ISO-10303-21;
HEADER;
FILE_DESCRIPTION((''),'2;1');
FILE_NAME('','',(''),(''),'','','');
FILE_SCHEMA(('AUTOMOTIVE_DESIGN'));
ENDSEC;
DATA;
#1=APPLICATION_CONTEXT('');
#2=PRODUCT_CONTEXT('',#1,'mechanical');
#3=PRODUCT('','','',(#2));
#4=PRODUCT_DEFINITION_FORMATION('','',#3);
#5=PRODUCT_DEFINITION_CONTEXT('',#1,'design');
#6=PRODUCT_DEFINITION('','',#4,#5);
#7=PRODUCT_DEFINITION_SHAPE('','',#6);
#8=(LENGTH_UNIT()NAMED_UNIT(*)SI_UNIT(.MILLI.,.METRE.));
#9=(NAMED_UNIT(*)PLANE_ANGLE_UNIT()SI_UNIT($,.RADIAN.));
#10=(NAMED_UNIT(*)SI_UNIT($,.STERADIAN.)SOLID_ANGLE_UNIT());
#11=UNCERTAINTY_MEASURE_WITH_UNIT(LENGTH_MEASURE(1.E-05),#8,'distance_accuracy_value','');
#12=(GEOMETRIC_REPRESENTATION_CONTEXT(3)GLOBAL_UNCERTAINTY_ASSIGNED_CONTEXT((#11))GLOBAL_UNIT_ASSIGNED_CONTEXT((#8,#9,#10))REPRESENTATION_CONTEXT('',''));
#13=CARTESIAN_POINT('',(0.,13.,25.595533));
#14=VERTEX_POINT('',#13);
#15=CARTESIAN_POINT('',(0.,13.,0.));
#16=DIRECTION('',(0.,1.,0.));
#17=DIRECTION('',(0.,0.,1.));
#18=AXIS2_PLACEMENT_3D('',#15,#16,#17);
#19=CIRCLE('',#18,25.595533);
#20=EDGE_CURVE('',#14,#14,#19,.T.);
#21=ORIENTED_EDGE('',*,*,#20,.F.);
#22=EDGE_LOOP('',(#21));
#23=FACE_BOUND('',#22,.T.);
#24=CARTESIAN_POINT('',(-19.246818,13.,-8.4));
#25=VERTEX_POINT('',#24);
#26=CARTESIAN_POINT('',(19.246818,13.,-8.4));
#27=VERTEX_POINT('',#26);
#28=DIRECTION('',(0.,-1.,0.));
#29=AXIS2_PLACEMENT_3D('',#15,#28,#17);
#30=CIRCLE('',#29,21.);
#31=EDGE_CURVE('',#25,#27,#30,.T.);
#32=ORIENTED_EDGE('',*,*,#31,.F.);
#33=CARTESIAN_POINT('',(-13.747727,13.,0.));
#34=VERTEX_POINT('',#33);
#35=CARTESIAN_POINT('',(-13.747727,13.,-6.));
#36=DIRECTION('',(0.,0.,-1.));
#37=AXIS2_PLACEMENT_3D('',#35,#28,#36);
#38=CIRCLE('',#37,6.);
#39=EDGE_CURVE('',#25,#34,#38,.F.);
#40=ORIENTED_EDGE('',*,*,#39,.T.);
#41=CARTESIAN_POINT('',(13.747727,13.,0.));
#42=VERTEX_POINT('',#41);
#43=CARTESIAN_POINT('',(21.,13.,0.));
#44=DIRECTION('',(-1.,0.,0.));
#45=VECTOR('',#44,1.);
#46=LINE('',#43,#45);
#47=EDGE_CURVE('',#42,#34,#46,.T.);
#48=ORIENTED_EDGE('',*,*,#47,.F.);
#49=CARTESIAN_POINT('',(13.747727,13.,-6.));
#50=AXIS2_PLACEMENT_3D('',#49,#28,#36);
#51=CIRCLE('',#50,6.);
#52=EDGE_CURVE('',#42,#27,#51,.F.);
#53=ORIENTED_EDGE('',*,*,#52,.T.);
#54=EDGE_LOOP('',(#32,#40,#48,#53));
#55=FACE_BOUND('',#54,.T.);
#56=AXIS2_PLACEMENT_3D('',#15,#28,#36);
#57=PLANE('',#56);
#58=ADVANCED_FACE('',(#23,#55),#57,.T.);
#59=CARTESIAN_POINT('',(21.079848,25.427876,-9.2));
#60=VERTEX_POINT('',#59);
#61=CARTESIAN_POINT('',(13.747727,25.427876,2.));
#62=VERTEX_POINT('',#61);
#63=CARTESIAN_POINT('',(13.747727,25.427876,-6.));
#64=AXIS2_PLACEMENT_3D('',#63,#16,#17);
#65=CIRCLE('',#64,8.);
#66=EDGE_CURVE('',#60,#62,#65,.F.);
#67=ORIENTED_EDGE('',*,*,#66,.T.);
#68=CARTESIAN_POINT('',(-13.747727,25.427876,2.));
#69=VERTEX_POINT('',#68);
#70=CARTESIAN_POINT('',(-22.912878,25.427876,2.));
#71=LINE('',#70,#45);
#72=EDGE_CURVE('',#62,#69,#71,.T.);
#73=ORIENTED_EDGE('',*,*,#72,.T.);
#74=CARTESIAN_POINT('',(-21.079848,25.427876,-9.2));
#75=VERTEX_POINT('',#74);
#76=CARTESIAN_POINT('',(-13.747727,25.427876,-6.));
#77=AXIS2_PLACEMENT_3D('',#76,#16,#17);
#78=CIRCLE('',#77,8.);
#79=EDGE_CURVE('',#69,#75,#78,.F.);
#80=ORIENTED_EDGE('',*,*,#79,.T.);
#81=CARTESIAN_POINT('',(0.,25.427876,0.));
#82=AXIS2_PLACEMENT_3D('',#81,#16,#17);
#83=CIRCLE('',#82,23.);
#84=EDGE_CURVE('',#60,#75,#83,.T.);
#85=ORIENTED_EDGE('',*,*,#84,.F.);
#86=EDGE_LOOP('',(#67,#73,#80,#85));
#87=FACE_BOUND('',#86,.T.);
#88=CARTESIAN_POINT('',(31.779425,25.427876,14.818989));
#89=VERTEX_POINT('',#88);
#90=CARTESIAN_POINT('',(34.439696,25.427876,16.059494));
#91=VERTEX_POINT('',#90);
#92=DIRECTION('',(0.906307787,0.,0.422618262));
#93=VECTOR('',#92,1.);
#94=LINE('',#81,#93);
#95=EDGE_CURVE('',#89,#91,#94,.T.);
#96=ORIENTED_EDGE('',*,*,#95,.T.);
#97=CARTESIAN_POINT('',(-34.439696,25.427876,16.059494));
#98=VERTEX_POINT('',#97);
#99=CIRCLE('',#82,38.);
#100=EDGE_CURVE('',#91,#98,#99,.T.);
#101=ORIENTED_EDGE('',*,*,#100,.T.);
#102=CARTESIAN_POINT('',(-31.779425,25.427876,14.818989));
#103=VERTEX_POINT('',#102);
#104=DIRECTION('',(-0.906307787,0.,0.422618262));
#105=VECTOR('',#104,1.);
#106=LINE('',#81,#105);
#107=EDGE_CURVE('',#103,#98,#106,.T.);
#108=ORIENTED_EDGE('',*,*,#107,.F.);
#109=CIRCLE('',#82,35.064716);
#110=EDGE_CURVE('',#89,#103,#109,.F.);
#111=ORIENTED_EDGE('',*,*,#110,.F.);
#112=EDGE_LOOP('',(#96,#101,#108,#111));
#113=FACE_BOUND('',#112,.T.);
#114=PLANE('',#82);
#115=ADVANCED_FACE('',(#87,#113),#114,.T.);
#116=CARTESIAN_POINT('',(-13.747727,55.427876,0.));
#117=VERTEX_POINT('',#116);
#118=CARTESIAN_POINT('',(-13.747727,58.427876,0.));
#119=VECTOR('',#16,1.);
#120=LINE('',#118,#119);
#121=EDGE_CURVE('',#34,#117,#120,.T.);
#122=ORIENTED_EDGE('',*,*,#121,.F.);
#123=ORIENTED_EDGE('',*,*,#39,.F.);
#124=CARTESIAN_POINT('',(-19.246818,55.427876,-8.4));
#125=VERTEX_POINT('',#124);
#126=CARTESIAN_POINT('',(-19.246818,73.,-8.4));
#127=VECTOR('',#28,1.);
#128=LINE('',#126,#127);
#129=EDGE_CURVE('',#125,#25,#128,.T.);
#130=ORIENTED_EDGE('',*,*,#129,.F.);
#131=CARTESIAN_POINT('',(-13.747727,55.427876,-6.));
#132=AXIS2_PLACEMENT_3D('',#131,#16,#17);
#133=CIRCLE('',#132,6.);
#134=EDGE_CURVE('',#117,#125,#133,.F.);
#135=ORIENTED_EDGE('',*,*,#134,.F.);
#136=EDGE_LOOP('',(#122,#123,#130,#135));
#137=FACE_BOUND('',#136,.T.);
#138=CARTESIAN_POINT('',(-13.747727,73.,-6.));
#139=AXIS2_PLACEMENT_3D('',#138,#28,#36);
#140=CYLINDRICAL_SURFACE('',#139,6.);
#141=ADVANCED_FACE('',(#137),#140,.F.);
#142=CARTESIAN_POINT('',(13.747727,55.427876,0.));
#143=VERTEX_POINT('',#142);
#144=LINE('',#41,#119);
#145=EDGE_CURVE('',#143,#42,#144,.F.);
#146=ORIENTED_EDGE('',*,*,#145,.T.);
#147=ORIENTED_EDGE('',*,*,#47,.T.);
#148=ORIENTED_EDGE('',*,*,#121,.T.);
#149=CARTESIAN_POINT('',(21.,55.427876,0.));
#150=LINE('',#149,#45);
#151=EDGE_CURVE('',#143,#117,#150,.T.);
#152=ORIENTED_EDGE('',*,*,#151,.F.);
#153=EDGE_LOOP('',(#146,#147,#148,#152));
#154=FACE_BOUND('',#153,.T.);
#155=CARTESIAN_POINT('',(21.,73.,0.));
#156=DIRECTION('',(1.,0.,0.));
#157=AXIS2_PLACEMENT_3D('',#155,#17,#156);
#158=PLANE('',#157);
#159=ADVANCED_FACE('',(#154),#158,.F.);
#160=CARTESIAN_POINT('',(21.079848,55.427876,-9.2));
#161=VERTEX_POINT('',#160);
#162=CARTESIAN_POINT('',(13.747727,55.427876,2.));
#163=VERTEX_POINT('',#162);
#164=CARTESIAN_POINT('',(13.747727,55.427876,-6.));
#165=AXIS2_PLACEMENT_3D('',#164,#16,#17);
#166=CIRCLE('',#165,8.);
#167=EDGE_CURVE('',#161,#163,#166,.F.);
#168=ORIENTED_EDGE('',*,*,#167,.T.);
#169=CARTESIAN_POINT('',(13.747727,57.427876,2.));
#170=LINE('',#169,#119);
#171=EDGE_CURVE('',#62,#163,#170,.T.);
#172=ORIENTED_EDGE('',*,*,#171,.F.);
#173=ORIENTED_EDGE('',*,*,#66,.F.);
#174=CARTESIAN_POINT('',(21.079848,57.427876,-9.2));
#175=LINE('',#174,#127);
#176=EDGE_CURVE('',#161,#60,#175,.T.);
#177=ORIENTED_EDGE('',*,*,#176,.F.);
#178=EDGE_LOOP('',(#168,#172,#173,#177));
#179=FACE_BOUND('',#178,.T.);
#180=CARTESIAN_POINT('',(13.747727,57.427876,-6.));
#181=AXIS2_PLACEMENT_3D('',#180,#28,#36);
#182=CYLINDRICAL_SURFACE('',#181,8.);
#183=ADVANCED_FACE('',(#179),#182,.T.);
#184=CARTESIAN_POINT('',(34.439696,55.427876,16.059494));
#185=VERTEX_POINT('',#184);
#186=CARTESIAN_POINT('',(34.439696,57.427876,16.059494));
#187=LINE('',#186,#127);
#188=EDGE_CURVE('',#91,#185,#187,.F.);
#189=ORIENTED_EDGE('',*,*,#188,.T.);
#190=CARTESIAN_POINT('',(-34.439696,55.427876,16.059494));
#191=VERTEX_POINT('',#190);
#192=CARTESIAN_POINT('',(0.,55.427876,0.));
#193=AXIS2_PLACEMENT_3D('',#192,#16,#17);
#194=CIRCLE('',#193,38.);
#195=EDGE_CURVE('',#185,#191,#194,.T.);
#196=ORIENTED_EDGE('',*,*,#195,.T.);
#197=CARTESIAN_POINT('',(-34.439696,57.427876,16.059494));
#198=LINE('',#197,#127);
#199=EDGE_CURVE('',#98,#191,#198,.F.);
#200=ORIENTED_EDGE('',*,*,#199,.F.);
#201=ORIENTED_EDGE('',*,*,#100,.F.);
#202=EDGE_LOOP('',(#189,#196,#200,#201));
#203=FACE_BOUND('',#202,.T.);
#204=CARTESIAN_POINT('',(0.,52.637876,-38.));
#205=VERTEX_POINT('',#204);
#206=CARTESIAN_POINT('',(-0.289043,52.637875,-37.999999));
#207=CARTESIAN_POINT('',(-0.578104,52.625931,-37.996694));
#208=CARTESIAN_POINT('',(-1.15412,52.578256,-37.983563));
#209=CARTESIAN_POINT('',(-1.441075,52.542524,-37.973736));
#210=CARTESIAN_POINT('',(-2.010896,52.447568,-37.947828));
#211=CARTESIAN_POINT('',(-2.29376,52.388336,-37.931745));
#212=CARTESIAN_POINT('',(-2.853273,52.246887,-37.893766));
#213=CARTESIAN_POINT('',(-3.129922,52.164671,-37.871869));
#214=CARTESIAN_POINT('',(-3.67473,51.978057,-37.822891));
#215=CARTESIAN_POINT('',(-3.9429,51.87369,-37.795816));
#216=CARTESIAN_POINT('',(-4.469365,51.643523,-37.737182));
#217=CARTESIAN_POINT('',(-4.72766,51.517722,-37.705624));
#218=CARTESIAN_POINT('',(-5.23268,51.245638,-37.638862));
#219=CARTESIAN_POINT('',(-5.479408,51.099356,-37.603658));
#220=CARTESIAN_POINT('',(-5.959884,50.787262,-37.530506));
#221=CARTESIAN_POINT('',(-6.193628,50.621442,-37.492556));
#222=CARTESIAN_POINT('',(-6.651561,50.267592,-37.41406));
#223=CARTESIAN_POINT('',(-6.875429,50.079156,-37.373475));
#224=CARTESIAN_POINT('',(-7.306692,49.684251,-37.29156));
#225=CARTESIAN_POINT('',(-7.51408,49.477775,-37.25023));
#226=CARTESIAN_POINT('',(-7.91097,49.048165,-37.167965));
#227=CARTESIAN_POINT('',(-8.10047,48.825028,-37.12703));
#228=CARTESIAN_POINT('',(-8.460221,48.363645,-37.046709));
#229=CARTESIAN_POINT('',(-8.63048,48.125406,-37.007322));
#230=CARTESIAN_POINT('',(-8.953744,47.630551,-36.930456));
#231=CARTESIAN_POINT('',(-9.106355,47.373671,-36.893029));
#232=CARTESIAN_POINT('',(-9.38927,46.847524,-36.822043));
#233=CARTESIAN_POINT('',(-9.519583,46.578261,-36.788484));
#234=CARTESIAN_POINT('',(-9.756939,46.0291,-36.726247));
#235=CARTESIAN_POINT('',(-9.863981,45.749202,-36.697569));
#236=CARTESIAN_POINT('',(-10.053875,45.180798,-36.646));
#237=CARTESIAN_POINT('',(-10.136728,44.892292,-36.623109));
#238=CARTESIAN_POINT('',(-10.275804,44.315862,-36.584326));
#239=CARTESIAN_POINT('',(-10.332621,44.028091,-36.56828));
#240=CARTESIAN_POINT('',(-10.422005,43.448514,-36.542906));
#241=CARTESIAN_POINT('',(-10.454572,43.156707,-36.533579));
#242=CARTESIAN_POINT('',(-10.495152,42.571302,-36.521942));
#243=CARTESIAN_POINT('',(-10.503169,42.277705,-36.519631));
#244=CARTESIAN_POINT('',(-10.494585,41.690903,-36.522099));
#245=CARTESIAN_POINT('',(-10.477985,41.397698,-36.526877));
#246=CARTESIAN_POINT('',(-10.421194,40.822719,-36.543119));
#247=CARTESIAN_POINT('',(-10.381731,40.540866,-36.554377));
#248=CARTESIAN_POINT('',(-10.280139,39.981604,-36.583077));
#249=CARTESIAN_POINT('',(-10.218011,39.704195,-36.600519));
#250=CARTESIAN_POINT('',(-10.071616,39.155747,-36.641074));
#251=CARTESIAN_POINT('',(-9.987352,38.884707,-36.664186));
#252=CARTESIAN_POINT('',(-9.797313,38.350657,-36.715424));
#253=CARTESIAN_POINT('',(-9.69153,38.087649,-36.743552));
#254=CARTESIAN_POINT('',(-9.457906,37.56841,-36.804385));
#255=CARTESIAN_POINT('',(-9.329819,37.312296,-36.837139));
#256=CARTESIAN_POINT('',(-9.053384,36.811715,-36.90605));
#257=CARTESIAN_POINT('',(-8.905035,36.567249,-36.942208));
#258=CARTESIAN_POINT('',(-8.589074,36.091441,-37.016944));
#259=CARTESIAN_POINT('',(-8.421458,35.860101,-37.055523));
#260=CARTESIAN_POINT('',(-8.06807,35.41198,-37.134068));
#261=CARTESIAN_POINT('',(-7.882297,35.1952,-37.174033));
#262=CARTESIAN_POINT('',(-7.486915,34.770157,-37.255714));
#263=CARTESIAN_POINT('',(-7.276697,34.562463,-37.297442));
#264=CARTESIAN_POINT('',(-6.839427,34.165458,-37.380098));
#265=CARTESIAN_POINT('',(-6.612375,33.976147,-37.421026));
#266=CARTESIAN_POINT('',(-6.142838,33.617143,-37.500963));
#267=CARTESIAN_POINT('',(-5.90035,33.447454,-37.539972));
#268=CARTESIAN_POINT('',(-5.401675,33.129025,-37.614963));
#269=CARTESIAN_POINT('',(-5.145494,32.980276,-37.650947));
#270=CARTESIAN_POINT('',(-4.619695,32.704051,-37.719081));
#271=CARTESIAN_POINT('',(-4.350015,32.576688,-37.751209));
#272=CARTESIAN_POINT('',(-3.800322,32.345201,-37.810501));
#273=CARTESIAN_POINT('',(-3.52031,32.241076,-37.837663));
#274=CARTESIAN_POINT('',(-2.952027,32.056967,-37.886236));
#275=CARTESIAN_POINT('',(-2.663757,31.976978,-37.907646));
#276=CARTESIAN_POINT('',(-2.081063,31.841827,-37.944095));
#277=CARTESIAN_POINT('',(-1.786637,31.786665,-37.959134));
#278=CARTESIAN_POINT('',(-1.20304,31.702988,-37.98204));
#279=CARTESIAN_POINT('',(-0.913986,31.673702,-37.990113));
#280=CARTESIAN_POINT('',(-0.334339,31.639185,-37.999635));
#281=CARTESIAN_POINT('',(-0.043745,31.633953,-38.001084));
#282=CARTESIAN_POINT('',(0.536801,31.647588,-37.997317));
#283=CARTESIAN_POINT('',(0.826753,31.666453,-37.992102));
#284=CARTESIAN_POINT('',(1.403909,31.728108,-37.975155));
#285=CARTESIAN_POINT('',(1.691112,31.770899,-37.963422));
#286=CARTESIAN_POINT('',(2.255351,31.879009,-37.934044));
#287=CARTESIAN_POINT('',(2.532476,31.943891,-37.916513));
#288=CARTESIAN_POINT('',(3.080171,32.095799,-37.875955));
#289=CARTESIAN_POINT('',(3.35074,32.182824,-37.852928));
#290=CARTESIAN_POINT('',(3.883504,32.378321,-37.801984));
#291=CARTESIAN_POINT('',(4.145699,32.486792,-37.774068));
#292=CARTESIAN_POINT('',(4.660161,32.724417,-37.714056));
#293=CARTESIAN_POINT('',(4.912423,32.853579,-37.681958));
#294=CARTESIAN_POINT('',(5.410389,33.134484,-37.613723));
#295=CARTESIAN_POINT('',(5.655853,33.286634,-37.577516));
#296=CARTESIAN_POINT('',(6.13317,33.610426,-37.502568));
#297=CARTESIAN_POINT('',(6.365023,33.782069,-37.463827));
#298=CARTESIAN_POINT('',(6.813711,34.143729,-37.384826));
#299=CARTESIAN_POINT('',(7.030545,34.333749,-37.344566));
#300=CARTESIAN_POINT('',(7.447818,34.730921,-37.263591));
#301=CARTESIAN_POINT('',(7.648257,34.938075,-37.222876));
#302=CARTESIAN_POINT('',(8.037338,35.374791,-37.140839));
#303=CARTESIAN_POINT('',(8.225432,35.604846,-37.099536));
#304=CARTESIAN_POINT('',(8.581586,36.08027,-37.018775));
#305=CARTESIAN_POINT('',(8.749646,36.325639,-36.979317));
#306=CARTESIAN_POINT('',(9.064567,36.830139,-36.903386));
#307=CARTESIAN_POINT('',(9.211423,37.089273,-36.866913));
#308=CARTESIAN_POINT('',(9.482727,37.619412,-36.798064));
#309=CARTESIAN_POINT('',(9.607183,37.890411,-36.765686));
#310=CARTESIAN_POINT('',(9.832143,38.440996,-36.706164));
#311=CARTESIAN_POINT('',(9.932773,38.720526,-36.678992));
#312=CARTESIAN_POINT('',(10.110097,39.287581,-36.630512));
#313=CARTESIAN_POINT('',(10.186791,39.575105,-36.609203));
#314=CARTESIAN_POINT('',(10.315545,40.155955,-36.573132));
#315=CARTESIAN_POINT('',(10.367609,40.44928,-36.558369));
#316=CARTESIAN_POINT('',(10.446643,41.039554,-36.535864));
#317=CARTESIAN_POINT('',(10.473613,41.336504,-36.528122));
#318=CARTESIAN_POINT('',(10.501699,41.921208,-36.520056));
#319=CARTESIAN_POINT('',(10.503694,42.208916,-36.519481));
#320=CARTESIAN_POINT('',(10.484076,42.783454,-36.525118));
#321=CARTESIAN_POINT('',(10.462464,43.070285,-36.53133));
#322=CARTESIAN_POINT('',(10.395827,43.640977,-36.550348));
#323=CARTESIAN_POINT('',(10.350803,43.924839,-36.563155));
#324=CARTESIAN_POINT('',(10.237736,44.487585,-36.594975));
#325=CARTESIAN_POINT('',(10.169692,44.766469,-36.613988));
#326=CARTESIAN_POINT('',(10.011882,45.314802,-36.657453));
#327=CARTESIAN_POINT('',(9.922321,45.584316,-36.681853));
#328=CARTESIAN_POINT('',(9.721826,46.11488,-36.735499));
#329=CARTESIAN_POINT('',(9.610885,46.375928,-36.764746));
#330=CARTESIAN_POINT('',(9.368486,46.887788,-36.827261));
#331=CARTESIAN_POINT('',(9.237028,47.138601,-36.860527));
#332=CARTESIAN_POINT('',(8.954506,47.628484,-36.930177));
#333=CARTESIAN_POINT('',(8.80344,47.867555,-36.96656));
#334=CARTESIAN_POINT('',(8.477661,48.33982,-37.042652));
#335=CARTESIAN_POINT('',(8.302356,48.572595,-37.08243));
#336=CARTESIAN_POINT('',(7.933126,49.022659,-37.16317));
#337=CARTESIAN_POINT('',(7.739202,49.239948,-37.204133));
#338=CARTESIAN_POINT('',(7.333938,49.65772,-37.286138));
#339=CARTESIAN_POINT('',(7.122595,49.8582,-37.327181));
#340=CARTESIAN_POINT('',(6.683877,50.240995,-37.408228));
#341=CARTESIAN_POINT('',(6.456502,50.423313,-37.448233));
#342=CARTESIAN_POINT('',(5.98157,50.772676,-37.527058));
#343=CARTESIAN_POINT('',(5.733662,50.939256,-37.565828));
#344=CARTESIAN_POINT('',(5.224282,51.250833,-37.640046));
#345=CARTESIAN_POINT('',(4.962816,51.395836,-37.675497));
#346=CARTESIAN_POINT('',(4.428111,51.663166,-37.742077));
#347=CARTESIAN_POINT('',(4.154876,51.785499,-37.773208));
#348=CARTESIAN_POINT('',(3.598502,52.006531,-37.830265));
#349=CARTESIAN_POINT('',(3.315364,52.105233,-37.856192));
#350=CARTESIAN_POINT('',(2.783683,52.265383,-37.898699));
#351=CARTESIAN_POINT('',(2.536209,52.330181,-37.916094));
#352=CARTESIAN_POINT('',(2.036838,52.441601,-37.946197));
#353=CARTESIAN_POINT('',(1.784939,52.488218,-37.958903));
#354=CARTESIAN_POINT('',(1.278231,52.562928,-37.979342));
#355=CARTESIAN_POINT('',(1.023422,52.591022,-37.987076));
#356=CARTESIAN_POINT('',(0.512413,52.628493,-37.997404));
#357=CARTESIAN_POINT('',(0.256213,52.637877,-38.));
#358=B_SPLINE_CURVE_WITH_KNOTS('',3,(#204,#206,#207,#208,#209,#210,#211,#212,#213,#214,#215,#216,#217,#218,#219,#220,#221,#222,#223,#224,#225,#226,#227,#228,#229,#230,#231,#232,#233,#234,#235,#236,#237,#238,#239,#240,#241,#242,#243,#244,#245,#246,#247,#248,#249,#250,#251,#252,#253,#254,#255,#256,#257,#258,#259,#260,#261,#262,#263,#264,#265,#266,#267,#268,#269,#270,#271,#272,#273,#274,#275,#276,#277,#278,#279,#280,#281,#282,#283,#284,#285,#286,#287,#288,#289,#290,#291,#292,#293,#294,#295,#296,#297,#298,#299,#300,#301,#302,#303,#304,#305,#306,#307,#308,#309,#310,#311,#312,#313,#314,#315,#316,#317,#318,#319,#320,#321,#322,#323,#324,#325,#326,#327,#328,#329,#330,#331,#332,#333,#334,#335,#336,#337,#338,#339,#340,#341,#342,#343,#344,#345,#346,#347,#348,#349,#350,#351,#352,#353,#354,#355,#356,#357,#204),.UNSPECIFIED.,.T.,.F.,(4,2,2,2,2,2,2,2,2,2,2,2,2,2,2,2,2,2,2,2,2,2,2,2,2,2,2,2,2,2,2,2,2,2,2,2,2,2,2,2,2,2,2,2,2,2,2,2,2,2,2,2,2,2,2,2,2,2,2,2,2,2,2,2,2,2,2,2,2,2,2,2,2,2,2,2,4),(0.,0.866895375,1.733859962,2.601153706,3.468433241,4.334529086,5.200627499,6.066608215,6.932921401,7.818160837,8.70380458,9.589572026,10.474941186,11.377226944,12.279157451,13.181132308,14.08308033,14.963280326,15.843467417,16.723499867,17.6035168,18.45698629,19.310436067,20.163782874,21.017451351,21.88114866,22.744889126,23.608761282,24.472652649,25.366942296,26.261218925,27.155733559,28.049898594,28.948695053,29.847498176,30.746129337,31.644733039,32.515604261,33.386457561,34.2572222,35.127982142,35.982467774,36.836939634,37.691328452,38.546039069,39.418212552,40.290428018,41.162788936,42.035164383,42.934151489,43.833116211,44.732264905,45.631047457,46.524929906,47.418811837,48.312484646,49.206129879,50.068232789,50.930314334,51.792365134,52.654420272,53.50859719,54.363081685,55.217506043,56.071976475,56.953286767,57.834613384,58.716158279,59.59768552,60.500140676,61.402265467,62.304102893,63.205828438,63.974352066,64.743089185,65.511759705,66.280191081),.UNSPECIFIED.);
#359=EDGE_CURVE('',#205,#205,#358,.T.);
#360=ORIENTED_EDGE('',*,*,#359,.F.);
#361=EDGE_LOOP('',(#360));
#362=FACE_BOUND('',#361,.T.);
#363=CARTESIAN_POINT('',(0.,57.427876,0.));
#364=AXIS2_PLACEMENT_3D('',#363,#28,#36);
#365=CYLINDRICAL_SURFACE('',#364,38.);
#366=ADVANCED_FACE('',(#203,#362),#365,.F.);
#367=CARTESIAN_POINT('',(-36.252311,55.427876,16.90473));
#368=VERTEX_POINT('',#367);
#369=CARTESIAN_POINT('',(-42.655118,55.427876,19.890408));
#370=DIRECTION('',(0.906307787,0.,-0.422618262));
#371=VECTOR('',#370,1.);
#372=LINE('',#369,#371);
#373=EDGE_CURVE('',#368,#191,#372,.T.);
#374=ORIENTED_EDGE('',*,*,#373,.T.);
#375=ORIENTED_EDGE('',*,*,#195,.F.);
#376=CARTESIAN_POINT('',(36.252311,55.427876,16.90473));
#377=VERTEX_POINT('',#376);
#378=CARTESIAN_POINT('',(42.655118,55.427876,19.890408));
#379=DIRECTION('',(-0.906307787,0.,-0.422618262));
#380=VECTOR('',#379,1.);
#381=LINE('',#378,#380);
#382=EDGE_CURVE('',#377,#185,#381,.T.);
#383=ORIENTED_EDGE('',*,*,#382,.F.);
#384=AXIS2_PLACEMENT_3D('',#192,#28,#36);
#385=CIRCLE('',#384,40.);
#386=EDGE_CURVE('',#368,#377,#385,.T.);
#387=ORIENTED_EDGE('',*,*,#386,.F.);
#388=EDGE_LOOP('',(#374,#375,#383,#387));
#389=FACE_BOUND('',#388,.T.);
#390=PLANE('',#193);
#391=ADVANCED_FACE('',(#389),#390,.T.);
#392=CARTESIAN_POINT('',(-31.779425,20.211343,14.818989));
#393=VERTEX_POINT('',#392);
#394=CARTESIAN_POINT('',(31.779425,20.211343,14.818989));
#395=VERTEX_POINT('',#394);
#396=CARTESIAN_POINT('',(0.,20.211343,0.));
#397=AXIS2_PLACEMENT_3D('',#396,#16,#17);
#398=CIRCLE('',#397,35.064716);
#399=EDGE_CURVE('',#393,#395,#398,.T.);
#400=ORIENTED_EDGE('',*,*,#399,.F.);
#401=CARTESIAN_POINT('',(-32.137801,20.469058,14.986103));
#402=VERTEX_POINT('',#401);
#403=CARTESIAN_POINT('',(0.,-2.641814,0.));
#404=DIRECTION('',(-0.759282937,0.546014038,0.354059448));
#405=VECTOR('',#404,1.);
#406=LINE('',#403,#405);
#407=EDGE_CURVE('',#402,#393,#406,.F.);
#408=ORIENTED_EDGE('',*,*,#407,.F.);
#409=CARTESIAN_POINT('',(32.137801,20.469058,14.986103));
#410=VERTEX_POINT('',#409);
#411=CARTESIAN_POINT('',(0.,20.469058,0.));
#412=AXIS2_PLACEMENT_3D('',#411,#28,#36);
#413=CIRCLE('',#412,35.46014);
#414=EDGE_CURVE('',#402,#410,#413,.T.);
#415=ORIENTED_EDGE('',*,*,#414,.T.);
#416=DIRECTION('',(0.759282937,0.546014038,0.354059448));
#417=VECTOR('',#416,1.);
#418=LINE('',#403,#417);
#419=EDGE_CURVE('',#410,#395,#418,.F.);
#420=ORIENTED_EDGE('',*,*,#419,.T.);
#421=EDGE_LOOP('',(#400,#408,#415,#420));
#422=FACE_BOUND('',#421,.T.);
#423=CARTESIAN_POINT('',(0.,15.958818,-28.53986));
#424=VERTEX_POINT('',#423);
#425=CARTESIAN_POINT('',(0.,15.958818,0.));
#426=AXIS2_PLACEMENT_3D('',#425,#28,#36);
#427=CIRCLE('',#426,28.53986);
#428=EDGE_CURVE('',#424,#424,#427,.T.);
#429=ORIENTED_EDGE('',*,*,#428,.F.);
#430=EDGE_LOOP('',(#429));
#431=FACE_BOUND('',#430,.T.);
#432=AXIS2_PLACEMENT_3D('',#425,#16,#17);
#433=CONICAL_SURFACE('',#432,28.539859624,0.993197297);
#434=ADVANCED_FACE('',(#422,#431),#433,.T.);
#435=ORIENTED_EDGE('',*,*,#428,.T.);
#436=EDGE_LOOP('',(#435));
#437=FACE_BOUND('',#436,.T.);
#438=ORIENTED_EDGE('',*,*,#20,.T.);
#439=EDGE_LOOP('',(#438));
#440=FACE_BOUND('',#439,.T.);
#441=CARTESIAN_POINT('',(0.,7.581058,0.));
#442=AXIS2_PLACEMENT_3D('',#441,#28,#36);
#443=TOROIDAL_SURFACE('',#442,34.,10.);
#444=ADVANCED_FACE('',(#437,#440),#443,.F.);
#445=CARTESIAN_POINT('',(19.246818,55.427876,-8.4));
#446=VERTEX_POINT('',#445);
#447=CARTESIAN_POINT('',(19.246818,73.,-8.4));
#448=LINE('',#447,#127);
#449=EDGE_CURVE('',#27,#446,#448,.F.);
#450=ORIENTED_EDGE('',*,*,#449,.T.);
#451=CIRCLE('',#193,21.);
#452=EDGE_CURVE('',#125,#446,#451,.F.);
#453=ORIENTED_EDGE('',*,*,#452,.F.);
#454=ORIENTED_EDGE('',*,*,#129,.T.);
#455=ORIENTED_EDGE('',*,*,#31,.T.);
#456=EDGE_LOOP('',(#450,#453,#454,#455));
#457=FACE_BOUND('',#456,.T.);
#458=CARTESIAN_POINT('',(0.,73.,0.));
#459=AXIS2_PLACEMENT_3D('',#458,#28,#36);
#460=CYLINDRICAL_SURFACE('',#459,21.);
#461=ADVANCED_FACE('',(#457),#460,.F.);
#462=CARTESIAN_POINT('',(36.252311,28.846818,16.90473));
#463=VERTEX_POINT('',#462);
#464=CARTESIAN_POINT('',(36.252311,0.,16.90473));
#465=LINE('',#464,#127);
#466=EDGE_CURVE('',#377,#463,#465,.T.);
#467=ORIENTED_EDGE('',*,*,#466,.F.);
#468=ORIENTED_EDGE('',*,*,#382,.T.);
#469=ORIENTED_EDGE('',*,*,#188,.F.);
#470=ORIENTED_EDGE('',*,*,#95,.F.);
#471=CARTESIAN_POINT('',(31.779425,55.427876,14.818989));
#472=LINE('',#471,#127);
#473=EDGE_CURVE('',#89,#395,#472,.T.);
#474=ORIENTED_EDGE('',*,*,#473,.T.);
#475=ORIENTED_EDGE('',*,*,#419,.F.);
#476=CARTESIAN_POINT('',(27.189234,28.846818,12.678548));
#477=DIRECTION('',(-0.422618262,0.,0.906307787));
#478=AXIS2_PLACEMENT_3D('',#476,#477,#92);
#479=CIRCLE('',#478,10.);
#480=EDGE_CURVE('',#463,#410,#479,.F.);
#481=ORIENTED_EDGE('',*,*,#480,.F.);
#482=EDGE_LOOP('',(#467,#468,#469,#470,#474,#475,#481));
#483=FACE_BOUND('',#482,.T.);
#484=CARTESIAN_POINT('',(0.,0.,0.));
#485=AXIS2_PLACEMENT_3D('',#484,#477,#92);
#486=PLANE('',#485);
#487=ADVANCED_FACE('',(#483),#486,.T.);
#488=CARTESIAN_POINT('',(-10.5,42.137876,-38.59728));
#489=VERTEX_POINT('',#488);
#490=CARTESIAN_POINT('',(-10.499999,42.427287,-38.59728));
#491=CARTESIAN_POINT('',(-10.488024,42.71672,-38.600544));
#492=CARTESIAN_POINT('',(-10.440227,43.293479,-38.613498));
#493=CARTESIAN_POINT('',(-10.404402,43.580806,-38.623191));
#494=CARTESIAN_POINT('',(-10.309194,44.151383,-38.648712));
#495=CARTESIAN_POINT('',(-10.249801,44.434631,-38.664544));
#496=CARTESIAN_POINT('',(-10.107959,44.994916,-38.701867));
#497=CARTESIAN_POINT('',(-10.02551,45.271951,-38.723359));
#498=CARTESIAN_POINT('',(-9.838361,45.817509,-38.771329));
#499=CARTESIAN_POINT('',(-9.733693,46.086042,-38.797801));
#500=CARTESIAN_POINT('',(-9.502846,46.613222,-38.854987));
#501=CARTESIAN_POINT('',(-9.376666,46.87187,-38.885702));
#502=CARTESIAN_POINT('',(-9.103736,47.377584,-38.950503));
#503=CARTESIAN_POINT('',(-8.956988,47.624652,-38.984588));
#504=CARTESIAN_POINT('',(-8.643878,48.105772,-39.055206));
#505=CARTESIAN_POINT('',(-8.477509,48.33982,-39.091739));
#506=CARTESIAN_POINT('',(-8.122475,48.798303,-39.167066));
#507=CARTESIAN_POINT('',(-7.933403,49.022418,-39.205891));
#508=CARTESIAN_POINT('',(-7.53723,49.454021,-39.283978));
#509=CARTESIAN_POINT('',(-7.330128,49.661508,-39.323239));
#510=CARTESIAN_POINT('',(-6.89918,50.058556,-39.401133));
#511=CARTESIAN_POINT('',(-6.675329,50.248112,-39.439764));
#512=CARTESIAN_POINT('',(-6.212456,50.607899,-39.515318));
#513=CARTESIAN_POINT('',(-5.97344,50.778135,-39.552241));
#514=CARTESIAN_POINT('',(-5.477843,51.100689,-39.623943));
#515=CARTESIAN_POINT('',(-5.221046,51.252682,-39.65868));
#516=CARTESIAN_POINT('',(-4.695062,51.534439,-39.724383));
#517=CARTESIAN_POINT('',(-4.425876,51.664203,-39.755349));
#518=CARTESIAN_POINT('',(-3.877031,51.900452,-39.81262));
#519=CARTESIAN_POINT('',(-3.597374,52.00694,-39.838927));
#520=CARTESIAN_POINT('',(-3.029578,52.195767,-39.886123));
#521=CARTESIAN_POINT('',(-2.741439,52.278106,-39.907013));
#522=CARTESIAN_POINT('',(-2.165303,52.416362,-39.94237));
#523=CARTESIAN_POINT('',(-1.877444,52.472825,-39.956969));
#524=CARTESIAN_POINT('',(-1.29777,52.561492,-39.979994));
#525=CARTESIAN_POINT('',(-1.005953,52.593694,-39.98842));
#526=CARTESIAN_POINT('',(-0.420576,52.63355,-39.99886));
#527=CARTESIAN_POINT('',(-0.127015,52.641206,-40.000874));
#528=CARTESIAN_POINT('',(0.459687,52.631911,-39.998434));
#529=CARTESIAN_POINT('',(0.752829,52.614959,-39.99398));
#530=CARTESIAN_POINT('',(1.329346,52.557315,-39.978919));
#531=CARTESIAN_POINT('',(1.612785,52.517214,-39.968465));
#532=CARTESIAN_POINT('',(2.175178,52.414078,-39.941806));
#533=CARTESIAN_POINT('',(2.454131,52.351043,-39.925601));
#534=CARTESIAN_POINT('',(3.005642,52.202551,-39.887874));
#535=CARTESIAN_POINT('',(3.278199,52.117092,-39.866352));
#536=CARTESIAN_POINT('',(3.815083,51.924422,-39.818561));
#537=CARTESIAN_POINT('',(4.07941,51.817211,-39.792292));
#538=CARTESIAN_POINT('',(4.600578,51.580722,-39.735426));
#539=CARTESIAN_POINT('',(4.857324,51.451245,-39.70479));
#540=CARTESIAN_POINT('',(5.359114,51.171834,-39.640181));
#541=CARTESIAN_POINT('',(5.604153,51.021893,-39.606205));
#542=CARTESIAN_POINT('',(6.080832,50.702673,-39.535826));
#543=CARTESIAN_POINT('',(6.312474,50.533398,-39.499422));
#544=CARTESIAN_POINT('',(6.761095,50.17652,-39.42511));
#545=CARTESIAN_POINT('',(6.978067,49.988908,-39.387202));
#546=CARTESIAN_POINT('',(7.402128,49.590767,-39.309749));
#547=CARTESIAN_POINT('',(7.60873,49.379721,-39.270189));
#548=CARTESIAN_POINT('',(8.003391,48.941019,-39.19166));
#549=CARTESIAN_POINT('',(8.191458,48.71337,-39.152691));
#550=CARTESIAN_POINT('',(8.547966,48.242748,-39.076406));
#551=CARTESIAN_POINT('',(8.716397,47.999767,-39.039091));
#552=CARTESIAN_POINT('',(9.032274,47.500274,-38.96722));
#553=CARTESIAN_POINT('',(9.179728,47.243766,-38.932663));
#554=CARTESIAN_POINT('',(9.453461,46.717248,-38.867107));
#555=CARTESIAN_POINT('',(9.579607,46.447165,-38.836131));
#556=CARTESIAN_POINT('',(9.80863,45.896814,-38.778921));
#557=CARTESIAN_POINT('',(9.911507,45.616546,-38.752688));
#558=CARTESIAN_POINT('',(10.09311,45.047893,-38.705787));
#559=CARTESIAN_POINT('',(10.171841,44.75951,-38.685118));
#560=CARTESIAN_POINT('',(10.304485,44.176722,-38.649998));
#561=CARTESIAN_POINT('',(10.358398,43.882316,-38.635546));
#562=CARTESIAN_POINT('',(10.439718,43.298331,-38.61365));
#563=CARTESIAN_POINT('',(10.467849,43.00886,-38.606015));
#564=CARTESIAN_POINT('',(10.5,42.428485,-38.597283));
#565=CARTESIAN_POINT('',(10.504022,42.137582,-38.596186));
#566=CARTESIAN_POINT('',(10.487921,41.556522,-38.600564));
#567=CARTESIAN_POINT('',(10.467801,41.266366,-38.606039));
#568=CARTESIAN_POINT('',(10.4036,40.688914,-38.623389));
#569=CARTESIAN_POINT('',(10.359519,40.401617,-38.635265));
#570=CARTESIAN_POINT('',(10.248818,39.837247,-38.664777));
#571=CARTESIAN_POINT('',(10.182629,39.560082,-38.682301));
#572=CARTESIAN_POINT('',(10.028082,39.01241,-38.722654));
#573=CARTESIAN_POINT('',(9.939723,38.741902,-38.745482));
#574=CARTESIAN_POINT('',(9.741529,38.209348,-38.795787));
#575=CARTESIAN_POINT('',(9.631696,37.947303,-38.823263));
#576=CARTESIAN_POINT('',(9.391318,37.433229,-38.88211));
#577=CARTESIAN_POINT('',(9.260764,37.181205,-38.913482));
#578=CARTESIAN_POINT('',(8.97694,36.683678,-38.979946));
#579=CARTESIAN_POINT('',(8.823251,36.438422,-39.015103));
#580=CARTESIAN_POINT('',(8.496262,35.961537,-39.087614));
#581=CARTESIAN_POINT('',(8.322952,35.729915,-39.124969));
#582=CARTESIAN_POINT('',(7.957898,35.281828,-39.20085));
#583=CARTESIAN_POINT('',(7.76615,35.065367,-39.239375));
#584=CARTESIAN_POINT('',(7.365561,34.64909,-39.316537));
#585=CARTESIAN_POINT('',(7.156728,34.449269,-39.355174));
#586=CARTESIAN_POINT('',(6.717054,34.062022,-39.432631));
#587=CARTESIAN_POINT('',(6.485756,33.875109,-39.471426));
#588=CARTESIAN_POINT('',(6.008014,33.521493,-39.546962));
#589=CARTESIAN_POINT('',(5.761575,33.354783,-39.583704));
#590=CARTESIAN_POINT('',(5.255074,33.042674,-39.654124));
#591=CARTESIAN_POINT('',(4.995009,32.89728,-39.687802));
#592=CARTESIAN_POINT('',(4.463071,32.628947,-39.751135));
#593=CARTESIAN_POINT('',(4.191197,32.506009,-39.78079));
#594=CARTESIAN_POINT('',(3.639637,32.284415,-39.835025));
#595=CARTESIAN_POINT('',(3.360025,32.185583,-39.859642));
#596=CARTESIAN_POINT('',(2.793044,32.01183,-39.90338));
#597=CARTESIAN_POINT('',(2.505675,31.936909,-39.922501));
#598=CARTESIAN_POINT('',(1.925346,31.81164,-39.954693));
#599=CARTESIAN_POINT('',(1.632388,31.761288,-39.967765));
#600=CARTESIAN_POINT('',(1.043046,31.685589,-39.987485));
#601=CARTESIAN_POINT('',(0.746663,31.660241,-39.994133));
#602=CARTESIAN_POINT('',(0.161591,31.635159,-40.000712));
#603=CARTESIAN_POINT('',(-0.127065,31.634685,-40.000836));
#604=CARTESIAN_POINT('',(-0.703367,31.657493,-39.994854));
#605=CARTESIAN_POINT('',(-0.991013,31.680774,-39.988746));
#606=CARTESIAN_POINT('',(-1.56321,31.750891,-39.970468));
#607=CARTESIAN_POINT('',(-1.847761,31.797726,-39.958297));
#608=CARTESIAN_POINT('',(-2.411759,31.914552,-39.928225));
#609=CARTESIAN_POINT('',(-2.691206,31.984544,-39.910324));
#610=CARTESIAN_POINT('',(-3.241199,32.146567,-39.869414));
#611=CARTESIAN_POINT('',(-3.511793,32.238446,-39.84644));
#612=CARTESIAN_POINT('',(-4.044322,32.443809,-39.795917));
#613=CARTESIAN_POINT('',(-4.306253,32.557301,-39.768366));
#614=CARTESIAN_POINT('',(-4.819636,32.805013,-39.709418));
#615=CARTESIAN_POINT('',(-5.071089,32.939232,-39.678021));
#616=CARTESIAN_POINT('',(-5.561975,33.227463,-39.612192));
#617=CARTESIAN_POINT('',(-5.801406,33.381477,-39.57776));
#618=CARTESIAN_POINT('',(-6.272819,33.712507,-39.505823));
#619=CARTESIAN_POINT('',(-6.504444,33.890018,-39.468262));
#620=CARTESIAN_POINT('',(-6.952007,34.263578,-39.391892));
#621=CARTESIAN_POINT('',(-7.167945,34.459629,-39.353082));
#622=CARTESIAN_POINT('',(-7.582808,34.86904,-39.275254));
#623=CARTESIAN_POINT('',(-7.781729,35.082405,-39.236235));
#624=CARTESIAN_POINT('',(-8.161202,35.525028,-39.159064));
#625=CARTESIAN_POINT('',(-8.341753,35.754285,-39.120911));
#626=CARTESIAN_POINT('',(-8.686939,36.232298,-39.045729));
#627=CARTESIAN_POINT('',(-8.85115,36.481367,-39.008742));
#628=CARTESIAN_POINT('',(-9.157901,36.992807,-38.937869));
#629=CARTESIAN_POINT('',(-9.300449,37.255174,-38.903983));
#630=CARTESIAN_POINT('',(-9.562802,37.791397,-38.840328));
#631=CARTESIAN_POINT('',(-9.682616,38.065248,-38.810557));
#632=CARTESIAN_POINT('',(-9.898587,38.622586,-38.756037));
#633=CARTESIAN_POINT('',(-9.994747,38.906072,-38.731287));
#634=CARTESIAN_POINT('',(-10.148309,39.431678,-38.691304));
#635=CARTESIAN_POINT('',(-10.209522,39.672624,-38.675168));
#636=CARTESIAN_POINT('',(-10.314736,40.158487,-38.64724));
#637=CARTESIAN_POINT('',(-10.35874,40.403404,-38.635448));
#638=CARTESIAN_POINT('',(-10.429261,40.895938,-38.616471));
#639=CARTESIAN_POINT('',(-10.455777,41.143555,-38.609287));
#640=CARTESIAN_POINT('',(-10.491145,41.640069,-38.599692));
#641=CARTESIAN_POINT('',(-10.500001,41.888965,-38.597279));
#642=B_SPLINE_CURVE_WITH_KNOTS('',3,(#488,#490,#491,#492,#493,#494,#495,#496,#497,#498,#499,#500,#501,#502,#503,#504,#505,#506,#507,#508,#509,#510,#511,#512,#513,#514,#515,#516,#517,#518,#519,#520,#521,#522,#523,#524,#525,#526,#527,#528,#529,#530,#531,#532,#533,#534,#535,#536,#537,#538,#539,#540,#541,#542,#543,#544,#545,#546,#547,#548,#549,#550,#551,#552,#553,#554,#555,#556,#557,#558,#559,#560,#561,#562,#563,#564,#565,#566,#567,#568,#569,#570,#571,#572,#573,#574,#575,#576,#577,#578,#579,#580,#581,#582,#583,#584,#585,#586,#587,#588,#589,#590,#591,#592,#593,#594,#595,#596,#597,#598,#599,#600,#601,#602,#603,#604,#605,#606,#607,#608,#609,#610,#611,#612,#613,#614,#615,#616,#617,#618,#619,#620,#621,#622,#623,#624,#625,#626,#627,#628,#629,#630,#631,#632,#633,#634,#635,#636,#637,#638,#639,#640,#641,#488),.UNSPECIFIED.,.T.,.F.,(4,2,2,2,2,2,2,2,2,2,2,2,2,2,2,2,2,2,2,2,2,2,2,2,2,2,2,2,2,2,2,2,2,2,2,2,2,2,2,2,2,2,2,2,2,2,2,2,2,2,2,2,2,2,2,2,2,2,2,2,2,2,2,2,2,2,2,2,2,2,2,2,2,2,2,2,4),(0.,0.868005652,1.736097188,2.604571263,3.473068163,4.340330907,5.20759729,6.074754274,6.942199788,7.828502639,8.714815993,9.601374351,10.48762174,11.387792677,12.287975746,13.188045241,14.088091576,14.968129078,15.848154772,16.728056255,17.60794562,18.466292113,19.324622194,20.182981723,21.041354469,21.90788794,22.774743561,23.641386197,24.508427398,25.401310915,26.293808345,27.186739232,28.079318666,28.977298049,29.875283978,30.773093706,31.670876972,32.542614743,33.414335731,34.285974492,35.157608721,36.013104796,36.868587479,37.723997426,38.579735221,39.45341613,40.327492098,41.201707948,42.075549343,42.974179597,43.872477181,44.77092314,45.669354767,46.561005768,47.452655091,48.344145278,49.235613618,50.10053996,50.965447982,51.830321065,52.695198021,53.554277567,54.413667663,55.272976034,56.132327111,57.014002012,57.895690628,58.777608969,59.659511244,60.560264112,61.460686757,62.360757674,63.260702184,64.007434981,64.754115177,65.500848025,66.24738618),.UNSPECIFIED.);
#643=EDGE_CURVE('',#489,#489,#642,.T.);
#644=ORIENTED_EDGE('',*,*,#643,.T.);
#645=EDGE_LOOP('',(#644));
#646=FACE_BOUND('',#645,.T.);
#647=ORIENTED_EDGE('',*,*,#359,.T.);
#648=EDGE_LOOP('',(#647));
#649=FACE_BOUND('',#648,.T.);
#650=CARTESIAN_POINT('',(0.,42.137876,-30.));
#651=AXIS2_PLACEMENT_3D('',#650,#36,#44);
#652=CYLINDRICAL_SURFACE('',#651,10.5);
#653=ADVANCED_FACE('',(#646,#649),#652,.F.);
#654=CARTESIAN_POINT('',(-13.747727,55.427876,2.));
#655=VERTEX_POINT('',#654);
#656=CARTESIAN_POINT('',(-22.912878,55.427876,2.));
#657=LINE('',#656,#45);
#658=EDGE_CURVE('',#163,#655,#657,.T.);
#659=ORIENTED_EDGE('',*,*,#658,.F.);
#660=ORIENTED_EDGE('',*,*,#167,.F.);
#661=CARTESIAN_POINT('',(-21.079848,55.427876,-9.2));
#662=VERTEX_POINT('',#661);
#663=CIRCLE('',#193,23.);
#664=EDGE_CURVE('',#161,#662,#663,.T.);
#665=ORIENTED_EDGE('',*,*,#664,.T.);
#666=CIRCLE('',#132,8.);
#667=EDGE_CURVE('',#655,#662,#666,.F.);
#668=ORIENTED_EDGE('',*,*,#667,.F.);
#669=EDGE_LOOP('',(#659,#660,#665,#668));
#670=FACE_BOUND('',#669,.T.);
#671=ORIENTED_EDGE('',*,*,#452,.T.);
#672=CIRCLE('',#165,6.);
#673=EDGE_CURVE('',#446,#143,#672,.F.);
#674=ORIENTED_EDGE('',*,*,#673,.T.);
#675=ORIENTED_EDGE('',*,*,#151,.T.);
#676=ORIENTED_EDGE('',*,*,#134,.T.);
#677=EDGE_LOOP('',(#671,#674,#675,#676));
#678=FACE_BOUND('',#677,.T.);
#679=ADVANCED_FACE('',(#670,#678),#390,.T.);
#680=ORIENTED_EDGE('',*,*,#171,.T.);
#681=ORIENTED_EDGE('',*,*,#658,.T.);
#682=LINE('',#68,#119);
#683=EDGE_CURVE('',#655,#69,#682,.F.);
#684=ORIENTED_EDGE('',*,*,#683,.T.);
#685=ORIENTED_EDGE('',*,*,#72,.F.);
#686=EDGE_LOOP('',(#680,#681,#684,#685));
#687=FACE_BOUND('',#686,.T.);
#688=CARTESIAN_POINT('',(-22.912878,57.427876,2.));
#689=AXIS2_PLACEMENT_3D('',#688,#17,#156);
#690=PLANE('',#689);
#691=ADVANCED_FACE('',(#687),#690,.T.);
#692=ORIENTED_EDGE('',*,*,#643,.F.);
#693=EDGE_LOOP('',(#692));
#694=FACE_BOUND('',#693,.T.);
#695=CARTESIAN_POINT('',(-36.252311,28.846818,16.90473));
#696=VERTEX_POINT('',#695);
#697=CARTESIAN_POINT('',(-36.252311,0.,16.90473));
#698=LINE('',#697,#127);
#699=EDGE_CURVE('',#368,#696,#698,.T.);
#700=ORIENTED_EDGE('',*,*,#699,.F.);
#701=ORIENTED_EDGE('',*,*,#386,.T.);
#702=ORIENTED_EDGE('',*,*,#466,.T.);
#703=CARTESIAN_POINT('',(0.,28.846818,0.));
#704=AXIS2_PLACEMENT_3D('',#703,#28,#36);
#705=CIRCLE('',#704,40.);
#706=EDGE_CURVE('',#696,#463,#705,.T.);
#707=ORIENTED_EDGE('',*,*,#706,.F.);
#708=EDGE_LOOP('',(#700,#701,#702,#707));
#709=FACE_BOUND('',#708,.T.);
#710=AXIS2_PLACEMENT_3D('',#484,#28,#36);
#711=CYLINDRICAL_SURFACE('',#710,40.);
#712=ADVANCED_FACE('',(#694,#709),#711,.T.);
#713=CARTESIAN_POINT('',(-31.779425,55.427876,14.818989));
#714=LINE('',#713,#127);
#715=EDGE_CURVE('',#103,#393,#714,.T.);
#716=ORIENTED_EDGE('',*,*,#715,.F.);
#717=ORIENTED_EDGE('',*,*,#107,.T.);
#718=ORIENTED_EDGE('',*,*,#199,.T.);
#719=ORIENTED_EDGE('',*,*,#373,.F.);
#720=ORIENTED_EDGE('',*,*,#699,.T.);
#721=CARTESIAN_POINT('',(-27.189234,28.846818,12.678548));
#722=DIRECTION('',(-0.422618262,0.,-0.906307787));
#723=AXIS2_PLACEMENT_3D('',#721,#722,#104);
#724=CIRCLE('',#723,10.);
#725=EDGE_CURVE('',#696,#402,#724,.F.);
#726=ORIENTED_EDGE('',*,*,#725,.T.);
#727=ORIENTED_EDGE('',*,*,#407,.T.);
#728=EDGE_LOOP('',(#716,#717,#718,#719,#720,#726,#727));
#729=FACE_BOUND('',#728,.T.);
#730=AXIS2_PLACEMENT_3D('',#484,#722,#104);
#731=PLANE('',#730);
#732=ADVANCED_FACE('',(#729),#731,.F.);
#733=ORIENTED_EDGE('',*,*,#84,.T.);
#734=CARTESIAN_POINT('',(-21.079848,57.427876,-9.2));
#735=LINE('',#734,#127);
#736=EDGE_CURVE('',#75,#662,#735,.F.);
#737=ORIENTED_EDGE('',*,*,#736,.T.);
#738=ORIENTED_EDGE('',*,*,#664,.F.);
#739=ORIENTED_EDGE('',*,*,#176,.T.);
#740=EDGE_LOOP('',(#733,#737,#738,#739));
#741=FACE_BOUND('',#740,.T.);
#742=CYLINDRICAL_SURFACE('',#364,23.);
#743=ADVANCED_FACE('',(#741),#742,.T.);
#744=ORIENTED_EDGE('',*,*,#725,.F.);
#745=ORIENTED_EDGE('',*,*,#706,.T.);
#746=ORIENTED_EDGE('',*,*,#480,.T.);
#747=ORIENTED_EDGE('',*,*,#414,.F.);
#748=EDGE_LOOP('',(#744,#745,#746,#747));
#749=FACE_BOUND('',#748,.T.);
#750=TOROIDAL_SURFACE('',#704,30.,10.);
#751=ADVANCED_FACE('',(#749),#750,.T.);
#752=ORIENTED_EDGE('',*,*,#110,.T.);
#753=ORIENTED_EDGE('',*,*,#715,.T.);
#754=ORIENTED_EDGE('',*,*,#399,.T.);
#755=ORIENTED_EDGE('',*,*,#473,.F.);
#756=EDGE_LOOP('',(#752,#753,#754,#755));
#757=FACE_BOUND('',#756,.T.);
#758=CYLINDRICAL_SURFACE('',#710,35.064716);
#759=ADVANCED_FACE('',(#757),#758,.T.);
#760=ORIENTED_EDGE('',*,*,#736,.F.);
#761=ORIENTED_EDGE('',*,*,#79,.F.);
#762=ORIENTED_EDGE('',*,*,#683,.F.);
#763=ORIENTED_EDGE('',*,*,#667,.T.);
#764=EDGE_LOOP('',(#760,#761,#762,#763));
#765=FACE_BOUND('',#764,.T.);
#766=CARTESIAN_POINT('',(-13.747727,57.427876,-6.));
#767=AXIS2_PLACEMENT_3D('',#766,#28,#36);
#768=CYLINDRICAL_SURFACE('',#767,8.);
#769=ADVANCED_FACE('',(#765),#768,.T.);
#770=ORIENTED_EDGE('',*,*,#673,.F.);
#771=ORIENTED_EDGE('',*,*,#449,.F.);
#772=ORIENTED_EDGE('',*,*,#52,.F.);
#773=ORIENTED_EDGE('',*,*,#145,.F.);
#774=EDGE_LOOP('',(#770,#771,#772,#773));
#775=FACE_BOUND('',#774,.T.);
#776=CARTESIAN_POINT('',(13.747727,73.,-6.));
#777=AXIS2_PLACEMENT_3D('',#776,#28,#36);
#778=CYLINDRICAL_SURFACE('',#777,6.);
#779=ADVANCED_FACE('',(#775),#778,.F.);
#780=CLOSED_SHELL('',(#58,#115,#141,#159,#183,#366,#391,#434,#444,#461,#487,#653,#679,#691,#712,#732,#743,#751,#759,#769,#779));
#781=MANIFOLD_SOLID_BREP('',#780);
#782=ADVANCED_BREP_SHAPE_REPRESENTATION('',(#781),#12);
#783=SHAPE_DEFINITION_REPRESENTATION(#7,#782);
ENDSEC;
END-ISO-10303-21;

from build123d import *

# Parameters (mm, degrees)
CUT_EXTRUDE3_DEPTH           = 60
CUT_EXTRUDE5_DEPTH           = 2
CUT_EXTRUDE5_DEPTH_BACK      = 30
SKETCH9_R                    = 38
SKETCH9_R_2                  = 23
SKETCH19_W                   = 12
SKETCH19_H                   = 36.5
CUT_REVOLVE2_ANGLE           = 65
CUT_REVOLVE2_OTHER_WAY_ANGLE = 65
SKETCH21_W                   = 3.25
SKETCH21_H                   = 4
BOSS_EXTRUDE3_DEPTH          = 1.35
CIRPATTERN1_COUNT            = 5
CUT_EXTRUDE9_START           = -5
CUT_EXTRUDE9_DEPTH           = 5
SKETCH23_R                   = 10.5
CUT_EXTRUDE10_DEPTH          = 10
SKETCH24_W                   = 15
SKETCH24_H                   = 8
BOSS_EXTRUDE4_DEPTH          = 8
SKETCH26_W                   = 10
SKETCH26_H                   = 6
CUT_EXTRUDE11_DEPTH          = 10
SKETCH27_W                   = 4
SKETCH27_H                   = 5
CUT_EXTRUDE12_DEPTH          = 5
CUT_EXTRUDE14_DEPTH          = 2
CUT_EXTRUDE14_DEPTH_BACK     = 30
SKETCH29_R                   = 1
CUT_EXTRUDE15_DEPTH          = 15
FILLET1_R                    = 6
FILLET2_R                    = 8
INTERSECT2_START             = 55.427876097
INTERSECT2_OUTLINE_W         = 10
INTERSECT2_OUTLINE_H         = 6
INTERSECT2_DEPTH             = 8
INTERSECT2_2_DEPTH           = 13
INTERSECT2_START_2           = 50.427876097
INTERSECT2_3_OUTLINE_W       = 15
INTERSECT2_3_OUTLINE_H       = 8
INTERSECT2_3_OUTLINE_W_2     = 10
INTERSECT2_3_OUTLINE_H_2     = 6
INTERSECT2_3_DEPTH           = 5


# Read off the part's stored shape, not the designer's step: Cut-Extrude9, Intersect2
with BuildPart() as part:
    # Sketch1 → Revolve1 (revolve)
    with BuildSketch(Plane.XY, mode=Mode.PRIVATE) as revolve1_sk:
        with BuildLine():
            Line((0, 63.427876097), (32, 63.427876097))
            ThreePointArc((32, 63.427876097), (37.656854249, 61.084730346), (40, 55.427876097))
            Line((40, 55.427876097), (40, 28.846818009))
            ThreePointArc((40, 28.846818009), (38.792081772, 24.082439968), (35.460140376, 20.469057744))
            Line((35.460140376, 20.469057744), (28.539859624, 15.958818353))
            ThreePointArc((28.539859624, 15.958818353), (25.207918228, 12.345436129), (24, 7.581058088))
            Line((24, 7.581058088), (24, 3.25))
            Line((24, 3.25), (24.35, 3))
            Line((24.35, 3), (24.35, 0))
            Line((24.35, 0), (22.5, 0))
            Line((22.5, 0), (22.5, 12.5))
            ThreePointArc((22.5, 12.5), (22.353553391, 12.853553391), (22, 13))
            Line((22, 13), (0, 13))
            Line((0, 13), (0, 63.427876097))
        make_face()
    revolve(revolve1_sk.sketch.rotate(Axis((0, 0, 0), (0, 1, 0)), 90), axis=Axis((0, 0, 0), (0, 1, 0)))

    # Sketch11 → Cut-Extrude3 (cut)
    with BuildSketch(Plane(origin=(0, 13, 0), x_dir=(-1, 0, 0), z_dir=(0, -1, 0))):
        with BuildLine():
            Line((-21, 0), (21, 0))
            ThreePointArc((21, 0), (0, 21), (-21, 0))
        make_face()
    extrude(amount=-CUT_EXTRUDE3_DEPTH, mode=Mode.SUBTRACT)

    # Sketch9 → Cut-Extrude5 (cut, two sides: drawn at the far end of the back side and taken through both)
    with BuildSketch(Plane(origin=(0, 55.427876097, 0), x_dir=(1, 0, 0), z_dir=(0, 1, 0)).offset(-CUT_EXTRUDE5_DEPTH_BACK)):
        with Locations(Location((0, 0, 0), (0, 0, 270))):
            Circle(SKETCH9_R)
        with Locations(Location((0, 0, 0), (0, 0, 270))):
            Circle(SKETCH9_R_2, mode=Mode.SUBTRACT)
    extrude(amount=CUT_EXTRUDE5_DEPTH + CUT_EXTRUDE5_DEPTH_BACK, mode=Mode.SUBTRACT)

    # Sketch19 → Cut-Revolve2 (revolve, cut)
    with BuildSketch(Plane(origin=(0, 0, 0), x_dir=(0, 0, -1), z_dir=(1, 0, 0))):
        with Locations((-41.064715832, 37.177876097)):
            Rectangle(SKETCH19_W, SKETCH19_H)
    revolve(axis=Axis((0, 0, 0), (0, 1, 0)), revolution_arc=CUT_REVOLVE2_ANGLE, mode=Mode.SUBTRACT)

    # Sketch19 → Cut-Revolve2 other way (revolve, cut)
    with BuildSketch(Plane(origin=(0, 0, 0), x_dir=(0, 0, -1), z_dir=(1, 0, 0))):
        with Locations((-41.064715832, 37.177876097)):
            Rectangle(SKETCH19_W, SKETCH19_H)
    revolve(axis=Axis((0, 0, 0), (0, -1, 0)), revolution_arc=CUT_REVOLVE2_OTHER_WAY_ANGLE, mode=Mode.SUBTRACT)

    # Sketch21 → Boss-Extrude3 (add)
    with BuildSketch(Plane(origin=(0, 0, 22.5), x_dir=(-1, 0, 0), z_dir=(0, 0, -1))):
        with Locations((0, 2)):
            Rectangle(SKETCH21_W, SKETCH21_H)
    boss_extrude3 = extrude(amount=BOSS_EXTRUDE3_DEPTH)

    # CirPattern1: Boss-Extrude3 ×5 about axis
    cirpattern1_axis = Axis((0, 0, 0), (0, 1, 0))
    for i in range(1, CIRPATTERN1_COUNT):
        add(boss_extrude3.rotate(cirpattern1_axis, i * 360 / CIRPATTERN1_COUNT))

    # Cut-Extrude9 outline → Cut-Extrude9 (cut)
    with BuildSketch(Plane(origin=(0, 63.427876097, 0), x_dir=(1, 0, 0), z_dir=(0, 1, 0)).offset(CUT_EXTRUDE9_START)):
        with BuildLine():
            ThreePointArc((40, 0), (0, 40), (-40, 0))
            Line((-40, 0), (-21, 0))
            ThreePointArc((-21, 0), (0, 21), (21, 0))
            Line((21, 0), (40, 0))
        make_face()
    extrude(amount=CUT_EXTRUDE9_DEPTH, mode=Mode.SUBTRACT)

    # Sketch23 → Cut-Extrude10 (cut)
    with BuildSketch(Plane(origin=(0, 0, -40), x_dir=(-1, 0, 0), z_dir=(0, 0, -1))):
        with Locations((0, 42.137876097)):
            Circle(SKETCH23_R)
    extrude(amount=-CUT_EXTRUDE10_DEPTH, mode=Mode.SUBTRACT)

    # Sketch24 → Boss-Extrude4 (add)
    with BuildSketch(Plane(origin=(0, 58.427876097, 0), x_dir=(1, 0, 0), z_dir=(0, 1, 0))):
        with Locations((0, 30)):
            Rectangle(SKETCH24_W, SKETCH24_H)
    extrude(amount=-BOSS_EXTRUDE4_DEPTH)

    # Sketch26 → Cut-Extrude11 (cut)
    with BuildSketch(Plane(origin=(0, 58.427876097, 0), x_dir=(1, 0, 0), z_dir=(0, 1, 0))):
        with Locations((0, 30)):
            Rectangle(SKETCH26_W, SKETCH26_H)
    extrude(amount=-CUT_EXTRUDE11_DEPTH, mode=Mode.SUBTRACT)

    # Sketch27 → Cut-Extrude12 (cut)
    with BuildSketch(Plane(origin=(7.5, 0, 0), x_dir=(0, 0, -1), z_dir=(1, 0, 0))):
        with Locations((30, 53.927876097)):
            Rectangle(SKETCH27_W, SKETCH27_H)
    extrude(amount=-CUT_EXTRUDE12_DEPTH, mode=Mode.SUBTRACT)

    # Sketch28 → Cut-Extrude14 (cut, two sides: drawn at the far end of the back side and taken through both)
    with BuildSketch(Plane(origin=(0, 55.427876097, 0), x_dir=(1, 0, 0), z_dir=(0, 1, 0)).offset(-CUT_EXTRUDE14_DEPTH_BACK)):
        with BuildLine():
            Line((-22.912878475, -2), (22.912878475, -2))
            ThreePointArc((22.912878475, -2), (0, -23), (-22.912878475, -2))
        make_face()
    extrude(amount=CUT_EXTRUDE14_DEPTH + CUT_EXTRUDE14_DEPTH_BACK, mode=Mode.SUBTRACT)

    # Sketch29 → Cut-Extrude15 (cut)
    with BuildSketch(Plane(origin=(0, 0, 0), x_dir=(-1, 0, 0), z_dir=(0, 0, -1))):
        with Locations((-30.416198487, 60.927876097)):
            Circle(SKETCH29_R)
        with Locations((30.416198487, 60.927876097)):
            Circle(SKETCH29_R)
        with Locations((0, 60.927876097)):
            Circle(SKETCH29_R)
    extrude(amount=-CUT_EXTRUDE15_DEPTH, mode=Mode.SUBTRACT)

    # Fillet1
    fillet1_edges = [part.edges().sort_by_distance(p)[0] for p in [
        (21, 35.713938048, 0),
        (-21, 35.713938048, 0),
    ]]
    fillet(fillet1_edges, radius=FILLET1_R)

    # Fillet2
    fillet2_edges = [part.edges().sort_by_distance(p)[0] for p in [
        (-22.912878475, 41.427876097, 2),
        (22.912878475, 41.427876097, 2),
    ]]
    fillet(fillet2_edges, radius=FILLET2_R)

    # Intersect2 outline → Intersect2 (cut)
    with BuildSketch(Plane(origin=(0, 0, 0), x_dir=(1, 0, 0), z_dir=(0, 1, 0)).offset(INTERSECT2_START)):
        Polygon((-42, -15), (-40.906642577, -15), (-42, -15.355253362), (-42, -42), (42, -42), (42, -15.355253362), (40.906642577, -15), (42, -15), (42, 32), (25.257971351, 32), (32.523396625, 42), (-32.523396625, 42), (-25.257971351, 32), (-42, 32), align=None)
        with Locations((0, 30)):
            Rectangle(INTERSECT2_OUTLINE_W, INTERSECT2_OUTLINE_H, mode=Mode.SUBTRACT)
    extrude(amount=INTERSECT2_DEPTH, mode=Mode.SUBTRACT)

    # Intersect2 2 outline → Intersect2 2 (cut)
    with BuildSketch(Plane(origin=(0, 0, 0), x_dir=(1, 0, 0), z_dir=(0, 1, 0))):
        Polygon((-42, 28), (-42, -15), (-40.906642577, -15), (-42, -15.355253362), (-42, -42), (42, -42), (42, -15.355253362), (40.906642577, -15), (42, -15), (42, 28), (7.5, 28), (7.5, 26), (-7.5, 26), (-7.5, 28), align=None)
    extrude(amount=INTERSECT2_2_DEPTH, mode=Mode.SUBTRACT)

    # Intersect2 3 outline → Intersect2 3 (cut)
    with BuildSketch(Plane(origin=(0, 0, 0), x_dir=(1, 0, 0), z_dir=(0, 1, 0)).offset(INTERSECT2_START_2)):
        with Locations((0, 30)):
            Rectangle(INTERSECT2_3_OUTLINE_W, INTERSECT2_3_OUTLINE_H)
        with Locations((0, 30)):
            Rectangle(INTERSECT2_3_OUTLINE_W_2, INTERSECT2_3_OUTLINE_H_2, mode=Mode.SUBTRACT)
    extrude(amount=INTERSECT2_3_DEPTH, mode=Mode.SUBTRACT)


solid = part.part
